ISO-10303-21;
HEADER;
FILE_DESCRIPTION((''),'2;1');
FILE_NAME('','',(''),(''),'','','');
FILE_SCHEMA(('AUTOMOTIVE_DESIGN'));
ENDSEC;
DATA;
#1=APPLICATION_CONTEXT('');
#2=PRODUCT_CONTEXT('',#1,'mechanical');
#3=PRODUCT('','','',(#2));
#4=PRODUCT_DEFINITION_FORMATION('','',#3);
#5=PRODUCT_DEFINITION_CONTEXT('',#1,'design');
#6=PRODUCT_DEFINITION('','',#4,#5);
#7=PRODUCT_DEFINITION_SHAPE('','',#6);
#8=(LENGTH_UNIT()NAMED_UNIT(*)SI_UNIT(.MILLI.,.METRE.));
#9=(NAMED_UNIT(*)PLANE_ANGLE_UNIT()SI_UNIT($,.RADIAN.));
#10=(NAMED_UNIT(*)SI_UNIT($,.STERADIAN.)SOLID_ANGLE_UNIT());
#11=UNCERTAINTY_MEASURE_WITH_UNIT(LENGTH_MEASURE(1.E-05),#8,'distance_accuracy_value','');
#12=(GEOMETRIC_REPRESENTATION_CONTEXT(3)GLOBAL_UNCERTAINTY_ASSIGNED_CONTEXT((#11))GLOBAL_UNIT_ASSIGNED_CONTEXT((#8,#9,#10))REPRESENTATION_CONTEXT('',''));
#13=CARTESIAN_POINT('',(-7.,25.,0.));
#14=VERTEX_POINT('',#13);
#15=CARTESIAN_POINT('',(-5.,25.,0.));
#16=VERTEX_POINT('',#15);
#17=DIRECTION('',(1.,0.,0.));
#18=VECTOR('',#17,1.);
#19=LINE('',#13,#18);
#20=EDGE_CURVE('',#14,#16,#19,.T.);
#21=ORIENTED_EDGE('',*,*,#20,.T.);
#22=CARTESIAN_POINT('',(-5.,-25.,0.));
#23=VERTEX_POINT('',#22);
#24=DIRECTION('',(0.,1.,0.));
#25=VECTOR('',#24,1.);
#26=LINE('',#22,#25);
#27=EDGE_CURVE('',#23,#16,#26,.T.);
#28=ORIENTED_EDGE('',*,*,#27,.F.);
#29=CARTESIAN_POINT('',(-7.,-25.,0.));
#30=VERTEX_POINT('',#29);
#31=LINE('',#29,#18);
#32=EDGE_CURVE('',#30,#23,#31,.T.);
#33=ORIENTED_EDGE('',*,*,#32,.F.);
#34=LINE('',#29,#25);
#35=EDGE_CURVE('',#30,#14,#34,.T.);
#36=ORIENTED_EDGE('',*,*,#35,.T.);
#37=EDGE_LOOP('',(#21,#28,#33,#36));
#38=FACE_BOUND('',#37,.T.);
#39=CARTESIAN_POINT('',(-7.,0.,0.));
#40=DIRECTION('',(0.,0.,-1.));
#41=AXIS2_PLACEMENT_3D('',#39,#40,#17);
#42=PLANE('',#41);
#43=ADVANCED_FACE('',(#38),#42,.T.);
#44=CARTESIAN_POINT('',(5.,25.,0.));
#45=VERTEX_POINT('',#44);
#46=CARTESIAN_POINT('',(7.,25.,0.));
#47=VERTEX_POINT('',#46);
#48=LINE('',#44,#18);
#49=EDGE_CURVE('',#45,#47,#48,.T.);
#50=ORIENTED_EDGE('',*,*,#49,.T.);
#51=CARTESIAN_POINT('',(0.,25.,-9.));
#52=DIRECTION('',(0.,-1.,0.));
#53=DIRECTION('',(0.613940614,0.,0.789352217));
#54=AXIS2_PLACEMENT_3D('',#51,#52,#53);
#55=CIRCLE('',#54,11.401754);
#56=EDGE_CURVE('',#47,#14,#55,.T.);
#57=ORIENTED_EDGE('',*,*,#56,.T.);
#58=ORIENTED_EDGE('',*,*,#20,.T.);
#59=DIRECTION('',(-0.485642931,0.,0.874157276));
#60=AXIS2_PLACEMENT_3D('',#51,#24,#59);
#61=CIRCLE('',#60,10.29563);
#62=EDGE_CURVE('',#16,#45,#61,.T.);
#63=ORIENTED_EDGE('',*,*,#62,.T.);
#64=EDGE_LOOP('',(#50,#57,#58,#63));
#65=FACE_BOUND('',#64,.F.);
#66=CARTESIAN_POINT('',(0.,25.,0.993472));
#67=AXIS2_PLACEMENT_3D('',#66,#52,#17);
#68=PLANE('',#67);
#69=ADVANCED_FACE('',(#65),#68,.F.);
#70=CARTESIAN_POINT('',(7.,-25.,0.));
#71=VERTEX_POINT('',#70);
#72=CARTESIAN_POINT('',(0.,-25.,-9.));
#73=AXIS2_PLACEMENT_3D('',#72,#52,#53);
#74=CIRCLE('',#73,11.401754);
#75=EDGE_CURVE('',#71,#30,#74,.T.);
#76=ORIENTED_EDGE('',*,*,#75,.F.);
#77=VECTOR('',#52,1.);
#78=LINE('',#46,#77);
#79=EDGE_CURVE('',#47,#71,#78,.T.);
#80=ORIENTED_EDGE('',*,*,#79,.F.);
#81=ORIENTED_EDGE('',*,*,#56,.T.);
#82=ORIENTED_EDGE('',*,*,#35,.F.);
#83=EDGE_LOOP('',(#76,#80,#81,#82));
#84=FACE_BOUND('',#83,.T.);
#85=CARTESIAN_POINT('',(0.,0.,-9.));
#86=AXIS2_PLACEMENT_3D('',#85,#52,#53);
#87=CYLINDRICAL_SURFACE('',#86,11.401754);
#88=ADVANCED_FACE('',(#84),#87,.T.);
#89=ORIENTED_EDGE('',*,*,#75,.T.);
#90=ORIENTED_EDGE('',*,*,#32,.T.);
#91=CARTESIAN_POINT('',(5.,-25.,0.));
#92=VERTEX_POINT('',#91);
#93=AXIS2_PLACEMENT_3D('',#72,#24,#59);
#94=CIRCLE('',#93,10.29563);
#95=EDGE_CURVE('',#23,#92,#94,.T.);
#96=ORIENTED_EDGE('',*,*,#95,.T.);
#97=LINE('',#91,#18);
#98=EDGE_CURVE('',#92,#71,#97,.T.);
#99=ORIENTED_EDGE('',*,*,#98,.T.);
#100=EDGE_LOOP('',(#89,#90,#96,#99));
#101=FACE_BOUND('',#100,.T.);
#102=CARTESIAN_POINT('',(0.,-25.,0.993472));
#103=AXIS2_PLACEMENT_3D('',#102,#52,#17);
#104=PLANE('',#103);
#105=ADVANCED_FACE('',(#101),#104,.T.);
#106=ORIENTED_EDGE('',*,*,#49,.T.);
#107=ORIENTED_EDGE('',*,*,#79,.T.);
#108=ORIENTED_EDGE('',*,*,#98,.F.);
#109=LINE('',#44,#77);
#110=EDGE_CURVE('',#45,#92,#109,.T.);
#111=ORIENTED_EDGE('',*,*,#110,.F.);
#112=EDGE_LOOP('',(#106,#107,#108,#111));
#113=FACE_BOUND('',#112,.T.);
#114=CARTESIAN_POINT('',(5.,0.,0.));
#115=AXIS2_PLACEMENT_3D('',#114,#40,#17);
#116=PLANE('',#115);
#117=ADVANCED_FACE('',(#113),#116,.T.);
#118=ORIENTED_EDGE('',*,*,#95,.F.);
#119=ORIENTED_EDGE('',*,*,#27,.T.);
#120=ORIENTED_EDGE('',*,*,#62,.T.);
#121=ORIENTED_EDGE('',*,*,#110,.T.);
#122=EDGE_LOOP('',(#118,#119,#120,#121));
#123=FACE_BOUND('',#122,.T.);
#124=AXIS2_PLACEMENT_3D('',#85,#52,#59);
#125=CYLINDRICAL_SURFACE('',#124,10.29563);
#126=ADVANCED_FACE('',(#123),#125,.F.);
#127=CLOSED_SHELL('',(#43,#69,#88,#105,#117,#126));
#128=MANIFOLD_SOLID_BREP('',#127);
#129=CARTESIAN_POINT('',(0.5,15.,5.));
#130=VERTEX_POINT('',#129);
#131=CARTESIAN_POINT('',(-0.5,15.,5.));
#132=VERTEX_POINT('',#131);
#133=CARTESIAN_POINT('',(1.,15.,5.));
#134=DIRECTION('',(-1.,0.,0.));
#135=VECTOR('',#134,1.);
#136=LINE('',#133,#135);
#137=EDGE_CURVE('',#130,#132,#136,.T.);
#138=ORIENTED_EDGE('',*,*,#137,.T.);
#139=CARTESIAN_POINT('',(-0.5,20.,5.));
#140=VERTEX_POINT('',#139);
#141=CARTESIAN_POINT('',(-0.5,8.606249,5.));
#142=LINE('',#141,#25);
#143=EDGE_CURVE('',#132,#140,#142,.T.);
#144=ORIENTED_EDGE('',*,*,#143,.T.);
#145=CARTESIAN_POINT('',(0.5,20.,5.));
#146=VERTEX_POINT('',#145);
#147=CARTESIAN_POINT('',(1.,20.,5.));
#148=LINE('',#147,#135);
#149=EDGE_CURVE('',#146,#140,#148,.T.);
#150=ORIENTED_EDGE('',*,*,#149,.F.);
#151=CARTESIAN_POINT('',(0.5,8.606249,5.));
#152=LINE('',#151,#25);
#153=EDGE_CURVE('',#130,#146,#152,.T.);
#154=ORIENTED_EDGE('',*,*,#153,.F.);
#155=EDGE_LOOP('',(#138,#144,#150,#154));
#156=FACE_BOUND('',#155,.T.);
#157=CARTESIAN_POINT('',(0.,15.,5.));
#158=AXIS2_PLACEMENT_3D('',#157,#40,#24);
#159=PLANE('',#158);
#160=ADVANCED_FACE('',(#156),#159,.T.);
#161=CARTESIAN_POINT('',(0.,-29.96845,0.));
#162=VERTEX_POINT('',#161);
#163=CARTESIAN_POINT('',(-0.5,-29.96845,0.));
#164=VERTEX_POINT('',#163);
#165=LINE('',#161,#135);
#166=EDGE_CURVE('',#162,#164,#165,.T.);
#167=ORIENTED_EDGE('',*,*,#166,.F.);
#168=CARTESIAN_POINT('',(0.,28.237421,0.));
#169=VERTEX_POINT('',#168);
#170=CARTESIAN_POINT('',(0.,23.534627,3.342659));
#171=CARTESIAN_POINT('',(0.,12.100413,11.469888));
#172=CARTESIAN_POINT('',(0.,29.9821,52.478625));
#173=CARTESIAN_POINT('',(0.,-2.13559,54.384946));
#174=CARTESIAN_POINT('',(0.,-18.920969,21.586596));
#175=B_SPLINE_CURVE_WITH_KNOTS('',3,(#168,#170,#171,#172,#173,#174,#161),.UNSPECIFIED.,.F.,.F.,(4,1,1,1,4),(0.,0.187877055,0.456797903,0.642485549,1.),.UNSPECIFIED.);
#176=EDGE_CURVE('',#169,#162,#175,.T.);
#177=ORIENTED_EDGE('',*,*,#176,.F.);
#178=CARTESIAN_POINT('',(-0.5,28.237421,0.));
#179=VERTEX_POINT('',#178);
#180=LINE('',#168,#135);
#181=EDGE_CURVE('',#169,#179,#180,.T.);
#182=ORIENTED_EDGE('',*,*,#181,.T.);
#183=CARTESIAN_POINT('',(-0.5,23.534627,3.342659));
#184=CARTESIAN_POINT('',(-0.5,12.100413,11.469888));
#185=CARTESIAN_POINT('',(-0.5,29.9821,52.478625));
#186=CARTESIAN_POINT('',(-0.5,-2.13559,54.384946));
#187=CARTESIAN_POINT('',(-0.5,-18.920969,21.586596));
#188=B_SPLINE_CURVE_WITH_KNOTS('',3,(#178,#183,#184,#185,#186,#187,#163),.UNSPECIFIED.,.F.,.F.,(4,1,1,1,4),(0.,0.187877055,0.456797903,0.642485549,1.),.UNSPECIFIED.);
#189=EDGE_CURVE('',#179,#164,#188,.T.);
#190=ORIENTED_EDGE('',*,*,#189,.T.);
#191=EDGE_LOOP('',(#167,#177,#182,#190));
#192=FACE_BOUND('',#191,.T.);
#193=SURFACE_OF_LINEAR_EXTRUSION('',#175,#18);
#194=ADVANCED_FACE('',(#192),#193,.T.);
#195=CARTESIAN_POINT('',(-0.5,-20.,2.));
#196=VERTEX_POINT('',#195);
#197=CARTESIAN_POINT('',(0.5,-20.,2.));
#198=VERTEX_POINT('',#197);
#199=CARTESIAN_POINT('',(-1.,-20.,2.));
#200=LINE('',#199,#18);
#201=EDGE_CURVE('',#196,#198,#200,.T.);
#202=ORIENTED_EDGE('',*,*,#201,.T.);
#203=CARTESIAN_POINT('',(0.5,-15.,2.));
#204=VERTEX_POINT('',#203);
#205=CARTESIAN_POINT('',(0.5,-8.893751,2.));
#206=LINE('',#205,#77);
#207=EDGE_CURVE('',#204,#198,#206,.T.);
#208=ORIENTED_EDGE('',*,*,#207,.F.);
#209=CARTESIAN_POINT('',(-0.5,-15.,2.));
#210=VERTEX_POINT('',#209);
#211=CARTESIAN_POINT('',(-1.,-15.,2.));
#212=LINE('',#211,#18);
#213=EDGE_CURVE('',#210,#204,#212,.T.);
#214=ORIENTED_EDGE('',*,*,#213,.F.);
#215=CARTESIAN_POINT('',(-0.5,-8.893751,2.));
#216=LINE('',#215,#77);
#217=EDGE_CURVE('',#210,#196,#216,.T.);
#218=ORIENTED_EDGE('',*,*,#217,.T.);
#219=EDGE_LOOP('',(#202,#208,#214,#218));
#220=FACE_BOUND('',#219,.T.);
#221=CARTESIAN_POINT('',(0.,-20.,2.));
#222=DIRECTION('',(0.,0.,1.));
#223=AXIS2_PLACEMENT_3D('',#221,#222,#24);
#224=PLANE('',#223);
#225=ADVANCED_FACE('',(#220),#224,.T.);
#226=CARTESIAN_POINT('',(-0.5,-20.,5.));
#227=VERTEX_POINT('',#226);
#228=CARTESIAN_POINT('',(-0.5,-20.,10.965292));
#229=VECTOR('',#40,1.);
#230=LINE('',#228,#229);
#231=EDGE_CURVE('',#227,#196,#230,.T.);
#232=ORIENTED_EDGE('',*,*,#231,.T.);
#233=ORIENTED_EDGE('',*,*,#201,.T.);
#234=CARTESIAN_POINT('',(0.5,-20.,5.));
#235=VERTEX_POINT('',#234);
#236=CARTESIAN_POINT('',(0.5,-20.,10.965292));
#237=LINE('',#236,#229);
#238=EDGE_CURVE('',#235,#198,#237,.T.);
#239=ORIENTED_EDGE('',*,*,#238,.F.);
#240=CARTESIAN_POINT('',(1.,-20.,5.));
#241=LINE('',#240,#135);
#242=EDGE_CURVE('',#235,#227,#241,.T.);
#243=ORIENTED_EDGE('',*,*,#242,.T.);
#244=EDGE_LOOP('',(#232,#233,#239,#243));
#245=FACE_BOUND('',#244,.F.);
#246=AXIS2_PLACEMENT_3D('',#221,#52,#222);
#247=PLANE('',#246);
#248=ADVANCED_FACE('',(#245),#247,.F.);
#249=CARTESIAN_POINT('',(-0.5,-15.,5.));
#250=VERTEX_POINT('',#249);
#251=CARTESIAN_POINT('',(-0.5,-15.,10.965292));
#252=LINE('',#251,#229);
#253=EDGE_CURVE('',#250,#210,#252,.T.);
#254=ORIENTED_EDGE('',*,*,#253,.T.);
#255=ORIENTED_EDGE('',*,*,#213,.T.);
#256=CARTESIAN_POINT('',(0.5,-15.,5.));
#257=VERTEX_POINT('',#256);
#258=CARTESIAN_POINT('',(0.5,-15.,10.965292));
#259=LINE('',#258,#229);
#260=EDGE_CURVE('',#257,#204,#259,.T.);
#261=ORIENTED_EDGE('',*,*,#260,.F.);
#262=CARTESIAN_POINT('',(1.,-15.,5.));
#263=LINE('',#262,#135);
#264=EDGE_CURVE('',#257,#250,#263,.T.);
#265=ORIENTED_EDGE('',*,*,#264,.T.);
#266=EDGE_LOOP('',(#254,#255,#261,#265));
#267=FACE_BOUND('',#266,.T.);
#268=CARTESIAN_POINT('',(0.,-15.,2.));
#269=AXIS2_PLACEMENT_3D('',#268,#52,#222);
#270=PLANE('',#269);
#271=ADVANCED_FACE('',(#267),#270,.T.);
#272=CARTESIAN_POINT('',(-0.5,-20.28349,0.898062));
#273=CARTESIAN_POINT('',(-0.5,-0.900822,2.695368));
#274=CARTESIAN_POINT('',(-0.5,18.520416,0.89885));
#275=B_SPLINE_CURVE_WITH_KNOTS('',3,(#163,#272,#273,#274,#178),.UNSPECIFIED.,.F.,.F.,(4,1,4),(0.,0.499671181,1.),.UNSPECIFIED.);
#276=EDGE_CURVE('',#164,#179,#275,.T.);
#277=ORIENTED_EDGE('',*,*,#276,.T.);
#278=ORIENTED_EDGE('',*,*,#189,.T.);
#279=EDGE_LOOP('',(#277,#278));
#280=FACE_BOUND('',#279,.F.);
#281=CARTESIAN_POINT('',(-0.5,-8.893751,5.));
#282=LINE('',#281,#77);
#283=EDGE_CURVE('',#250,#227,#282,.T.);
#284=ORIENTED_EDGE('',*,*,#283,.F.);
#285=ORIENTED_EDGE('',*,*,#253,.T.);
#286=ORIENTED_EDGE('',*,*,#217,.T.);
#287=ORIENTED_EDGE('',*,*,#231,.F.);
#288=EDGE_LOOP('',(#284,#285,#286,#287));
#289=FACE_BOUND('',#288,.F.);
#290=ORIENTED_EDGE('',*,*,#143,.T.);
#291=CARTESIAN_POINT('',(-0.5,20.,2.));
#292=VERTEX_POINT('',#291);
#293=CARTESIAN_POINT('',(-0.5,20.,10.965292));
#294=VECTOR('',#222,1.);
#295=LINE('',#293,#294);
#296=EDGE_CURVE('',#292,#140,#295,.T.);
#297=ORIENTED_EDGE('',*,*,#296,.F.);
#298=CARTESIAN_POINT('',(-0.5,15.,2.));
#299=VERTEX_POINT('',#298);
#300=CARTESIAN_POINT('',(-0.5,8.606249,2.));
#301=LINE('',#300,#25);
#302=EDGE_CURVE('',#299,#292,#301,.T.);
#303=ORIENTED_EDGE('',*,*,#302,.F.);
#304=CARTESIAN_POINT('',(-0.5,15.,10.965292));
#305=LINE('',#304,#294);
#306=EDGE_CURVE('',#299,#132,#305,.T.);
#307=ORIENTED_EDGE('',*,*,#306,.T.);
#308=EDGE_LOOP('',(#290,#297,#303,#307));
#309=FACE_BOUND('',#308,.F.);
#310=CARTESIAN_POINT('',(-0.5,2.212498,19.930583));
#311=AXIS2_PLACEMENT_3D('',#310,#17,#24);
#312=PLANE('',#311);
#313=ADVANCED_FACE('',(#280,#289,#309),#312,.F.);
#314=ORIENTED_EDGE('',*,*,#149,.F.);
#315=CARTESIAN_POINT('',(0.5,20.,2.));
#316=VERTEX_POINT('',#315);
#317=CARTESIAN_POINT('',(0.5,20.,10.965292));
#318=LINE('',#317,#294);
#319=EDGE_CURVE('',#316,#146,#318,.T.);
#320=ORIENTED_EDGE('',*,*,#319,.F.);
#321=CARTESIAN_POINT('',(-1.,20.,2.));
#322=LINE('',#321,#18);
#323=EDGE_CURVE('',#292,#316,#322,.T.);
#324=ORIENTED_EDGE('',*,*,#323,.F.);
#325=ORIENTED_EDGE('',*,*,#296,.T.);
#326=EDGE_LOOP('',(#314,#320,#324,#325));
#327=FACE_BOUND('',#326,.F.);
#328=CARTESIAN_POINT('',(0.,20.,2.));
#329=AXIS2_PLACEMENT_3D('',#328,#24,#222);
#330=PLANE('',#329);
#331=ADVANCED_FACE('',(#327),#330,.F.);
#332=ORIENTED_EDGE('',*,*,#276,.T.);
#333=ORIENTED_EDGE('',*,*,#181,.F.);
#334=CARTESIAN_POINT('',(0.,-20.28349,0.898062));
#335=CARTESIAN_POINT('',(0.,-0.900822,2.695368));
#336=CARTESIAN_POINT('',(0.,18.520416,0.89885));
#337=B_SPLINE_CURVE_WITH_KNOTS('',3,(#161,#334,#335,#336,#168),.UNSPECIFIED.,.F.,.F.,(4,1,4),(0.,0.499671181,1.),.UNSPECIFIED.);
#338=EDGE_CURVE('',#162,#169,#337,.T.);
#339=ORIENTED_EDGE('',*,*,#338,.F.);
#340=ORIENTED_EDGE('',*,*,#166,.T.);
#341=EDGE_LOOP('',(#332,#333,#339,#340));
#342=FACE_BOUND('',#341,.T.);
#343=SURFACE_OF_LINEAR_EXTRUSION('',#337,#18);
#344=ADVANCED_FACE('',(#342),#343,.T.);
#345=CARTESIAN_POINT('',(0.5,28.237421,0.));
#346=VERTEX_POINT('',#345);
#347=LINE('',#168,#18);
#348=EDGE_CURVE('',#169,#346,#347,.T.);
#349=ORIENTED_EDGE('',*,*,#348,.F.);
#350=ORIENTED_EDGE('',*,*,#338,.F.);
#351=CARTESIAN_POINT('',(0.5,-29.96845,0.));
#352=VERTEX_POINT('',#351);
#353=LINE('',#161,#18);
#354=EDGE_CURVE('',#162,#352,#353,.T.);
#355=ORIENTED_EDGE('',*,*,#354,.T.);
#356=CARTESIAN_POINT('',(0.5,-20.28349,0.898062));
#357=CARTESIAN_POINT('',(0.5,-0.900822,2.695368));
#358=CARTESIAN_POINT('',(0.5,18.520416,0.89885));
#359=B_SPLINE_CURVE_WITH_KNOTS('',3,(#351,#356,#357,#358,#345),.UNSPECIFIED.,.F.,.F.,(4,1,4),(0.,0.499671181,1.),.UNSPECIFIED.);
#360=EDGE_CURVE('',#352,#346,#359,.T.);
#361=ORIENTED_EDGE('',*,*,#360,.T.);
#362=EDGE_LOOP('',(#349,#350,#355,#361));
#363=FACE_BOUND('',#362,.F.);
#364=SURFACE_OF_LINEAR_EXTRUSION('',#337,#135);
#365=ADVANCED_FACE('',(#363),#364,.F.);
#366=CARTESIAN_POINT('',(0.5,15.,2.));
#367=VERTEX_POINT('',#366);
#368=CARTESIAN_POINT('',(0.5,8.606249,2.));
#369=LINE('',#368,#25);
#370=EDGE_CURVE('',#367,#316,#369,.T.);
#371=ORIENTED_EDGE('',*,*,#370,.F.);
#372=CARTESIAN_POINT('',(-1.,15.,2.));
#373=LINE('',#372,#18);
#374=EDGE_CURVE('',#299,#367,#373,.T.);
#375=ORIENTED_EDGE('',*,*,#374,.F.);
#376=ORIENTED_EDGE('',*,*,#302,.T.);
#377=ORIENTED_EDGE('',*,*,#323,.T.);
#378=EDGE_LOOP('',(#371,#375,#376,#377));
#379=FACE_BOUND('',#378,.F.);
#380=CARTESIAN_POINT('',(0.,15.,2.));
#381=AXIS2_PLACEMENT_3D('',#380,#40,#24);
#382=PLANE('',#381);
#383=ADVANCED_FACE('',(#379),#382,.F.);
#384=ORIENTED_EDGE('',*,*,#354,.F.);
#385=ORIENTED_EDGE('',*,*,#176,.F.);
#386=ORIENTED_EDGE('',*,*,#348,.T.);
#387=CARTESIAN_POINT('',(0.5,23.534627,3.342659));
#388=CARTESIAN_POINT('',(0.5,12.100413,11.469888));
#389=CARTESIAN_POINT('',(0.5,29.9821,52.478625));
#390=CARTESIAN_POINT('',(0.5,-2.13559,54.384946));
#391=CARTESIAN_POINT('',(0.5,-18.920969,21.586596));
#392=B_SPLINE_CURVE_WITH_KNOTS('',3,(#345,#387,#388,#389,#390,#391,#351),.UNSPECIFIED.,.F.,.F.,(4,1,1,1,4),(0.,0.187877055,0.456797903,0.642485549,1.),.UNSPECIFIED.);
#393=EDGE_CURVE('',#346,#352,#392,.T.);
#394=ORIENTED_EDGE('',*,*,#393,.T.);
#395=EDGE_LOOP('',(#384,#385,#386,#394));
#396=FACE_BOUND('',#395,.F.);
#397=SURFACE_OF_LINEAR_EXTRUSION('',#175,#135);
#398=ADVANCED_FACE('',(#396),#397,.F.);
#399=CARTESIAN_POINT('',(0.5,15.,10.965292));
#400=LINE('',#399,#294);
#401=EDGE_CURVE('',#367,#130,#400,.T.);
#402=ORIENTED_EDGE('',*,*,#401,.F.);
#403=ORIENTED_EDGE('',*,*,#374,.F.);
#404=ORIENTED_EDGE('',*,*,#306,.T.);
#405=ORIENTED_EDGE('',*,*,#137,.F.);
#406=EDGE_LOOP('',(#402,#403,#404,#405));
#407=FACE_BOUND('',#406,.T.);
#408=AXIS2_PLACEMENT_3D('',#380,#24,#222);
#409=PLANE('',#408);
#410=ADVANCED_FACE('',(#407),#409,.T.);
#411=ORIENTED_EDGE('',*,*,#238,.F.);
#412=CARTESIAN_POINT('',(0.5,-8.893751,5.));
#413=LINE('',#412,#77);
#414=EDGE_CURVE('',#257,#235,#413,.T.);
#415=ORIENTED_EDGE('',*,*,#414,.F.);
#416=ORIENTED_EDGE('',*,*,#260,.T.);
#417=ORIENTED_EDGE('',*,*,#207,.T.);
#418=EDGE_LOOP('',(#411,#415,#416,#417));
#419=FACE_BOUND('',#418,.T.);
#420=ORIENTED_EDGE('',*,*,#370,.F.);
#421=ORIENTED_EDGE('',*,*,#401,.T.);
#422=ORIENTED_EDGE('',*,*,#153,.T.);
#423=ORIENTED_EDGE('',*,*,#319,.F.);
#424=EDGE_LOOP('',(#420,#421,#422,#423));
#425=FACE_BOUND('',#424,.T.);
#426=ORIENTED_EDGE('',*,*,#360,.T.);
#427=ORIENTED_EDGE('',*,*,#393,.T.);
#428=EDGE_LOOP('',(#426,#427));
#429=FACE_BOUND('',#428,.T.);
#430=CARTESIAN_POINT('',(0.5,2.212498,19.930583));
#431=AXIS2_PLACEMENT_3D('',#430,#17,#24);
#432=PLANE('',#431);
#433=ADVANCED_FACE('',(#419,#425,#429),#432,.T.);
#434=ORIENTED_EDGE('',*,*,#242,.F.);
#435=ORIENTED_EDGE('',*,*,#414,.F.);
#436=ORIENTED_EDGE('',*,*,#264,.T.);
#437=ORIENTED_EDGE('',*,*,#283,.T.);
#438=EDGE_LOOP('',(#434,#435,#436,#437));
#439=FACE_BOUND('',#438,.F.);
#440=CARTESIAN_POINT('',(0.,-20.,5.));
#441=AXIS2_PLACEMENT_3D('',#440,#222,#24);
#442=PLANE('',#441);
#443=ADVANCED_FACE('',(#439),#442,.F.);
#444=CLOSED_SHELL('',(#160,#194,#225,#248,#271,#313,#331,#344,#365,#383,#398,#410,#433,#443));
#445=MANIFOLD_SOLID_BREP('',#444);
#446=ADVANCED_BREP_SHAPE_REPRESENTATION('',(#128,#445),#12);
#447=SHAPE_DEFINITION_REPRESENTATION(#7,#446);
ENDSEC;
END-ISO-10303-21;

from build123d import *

# Parameters (mm, degrees)
F2_DEPTH = 25
F3_DEPTH = 0.5
F4_W     = 5
F4_H     = 3
F5_DEPTH = 1


with BuildPart() as f2:
    # F0 (on Front) → F2 (new body, symmetric)
    with BuildSketch(Plane.XZ):
        with BuildLine():
            ThreePointArc((-5, 0), (0, 1.295630141), (5, 0))
            Line((5, 0), (7, 0))
            ThreePointArc((7, 0), (0, 2.401754251), (-7, 0))
            Line((-7, 0), (-5, 0))
        make_face()
    extrude(amount=F2_DEPTH, both=True)


with BuildPart() as f3:
    # F1 (on Right) → F3 (new body, symmetric)
    with BuildSketch(Plane.YZ):
        with BuildLine():
            add(Edge.make_bspline(
                [(-29.968450375, 0), (-20.2834898441, 0.8980619755), (-0.9008219888, 2.6953679045), (18.52041614, 0.8988497881), (28.2374212838, 0)],
                knots=[0, 0, 0, 0, 0.4996711806, 1, 1, 1, 1], degree=3))
            add(Edge.make_bspline(
                [(28.2374212838, 0), (23.5346273127, 3.3426593215), (12.1004134849, 11.4698878734), (29.9820999442, 52.4786254251), (-2.1355902035, 54.384946251), (-18.9209685078, 21.5865959824), (-29.968450375, 0)],
                knots=[0, 0, 0, 0, 0.1878770554, 0.456797903, 0.6424855486, 1, 1, 1, 1], degree=3))
        make_face()
    extrude(amount=F3_DEPTH, both=True)

    # F4 (on Right) → F5 (cut, symmetric)
    with BuildSketch(Plane.YZ):
        with Locations((-17.5, 3.5)):
            Rectangle(F4_W, F4_H)
        with Locations((17.5, 3.5)):
            Rectangle(F4_W, F4_H)
    extrude(amount=F5_DEPTH, both=True, mode=Mode.SUBTRACT)


solid = Compound([f2.part, f3.part])
